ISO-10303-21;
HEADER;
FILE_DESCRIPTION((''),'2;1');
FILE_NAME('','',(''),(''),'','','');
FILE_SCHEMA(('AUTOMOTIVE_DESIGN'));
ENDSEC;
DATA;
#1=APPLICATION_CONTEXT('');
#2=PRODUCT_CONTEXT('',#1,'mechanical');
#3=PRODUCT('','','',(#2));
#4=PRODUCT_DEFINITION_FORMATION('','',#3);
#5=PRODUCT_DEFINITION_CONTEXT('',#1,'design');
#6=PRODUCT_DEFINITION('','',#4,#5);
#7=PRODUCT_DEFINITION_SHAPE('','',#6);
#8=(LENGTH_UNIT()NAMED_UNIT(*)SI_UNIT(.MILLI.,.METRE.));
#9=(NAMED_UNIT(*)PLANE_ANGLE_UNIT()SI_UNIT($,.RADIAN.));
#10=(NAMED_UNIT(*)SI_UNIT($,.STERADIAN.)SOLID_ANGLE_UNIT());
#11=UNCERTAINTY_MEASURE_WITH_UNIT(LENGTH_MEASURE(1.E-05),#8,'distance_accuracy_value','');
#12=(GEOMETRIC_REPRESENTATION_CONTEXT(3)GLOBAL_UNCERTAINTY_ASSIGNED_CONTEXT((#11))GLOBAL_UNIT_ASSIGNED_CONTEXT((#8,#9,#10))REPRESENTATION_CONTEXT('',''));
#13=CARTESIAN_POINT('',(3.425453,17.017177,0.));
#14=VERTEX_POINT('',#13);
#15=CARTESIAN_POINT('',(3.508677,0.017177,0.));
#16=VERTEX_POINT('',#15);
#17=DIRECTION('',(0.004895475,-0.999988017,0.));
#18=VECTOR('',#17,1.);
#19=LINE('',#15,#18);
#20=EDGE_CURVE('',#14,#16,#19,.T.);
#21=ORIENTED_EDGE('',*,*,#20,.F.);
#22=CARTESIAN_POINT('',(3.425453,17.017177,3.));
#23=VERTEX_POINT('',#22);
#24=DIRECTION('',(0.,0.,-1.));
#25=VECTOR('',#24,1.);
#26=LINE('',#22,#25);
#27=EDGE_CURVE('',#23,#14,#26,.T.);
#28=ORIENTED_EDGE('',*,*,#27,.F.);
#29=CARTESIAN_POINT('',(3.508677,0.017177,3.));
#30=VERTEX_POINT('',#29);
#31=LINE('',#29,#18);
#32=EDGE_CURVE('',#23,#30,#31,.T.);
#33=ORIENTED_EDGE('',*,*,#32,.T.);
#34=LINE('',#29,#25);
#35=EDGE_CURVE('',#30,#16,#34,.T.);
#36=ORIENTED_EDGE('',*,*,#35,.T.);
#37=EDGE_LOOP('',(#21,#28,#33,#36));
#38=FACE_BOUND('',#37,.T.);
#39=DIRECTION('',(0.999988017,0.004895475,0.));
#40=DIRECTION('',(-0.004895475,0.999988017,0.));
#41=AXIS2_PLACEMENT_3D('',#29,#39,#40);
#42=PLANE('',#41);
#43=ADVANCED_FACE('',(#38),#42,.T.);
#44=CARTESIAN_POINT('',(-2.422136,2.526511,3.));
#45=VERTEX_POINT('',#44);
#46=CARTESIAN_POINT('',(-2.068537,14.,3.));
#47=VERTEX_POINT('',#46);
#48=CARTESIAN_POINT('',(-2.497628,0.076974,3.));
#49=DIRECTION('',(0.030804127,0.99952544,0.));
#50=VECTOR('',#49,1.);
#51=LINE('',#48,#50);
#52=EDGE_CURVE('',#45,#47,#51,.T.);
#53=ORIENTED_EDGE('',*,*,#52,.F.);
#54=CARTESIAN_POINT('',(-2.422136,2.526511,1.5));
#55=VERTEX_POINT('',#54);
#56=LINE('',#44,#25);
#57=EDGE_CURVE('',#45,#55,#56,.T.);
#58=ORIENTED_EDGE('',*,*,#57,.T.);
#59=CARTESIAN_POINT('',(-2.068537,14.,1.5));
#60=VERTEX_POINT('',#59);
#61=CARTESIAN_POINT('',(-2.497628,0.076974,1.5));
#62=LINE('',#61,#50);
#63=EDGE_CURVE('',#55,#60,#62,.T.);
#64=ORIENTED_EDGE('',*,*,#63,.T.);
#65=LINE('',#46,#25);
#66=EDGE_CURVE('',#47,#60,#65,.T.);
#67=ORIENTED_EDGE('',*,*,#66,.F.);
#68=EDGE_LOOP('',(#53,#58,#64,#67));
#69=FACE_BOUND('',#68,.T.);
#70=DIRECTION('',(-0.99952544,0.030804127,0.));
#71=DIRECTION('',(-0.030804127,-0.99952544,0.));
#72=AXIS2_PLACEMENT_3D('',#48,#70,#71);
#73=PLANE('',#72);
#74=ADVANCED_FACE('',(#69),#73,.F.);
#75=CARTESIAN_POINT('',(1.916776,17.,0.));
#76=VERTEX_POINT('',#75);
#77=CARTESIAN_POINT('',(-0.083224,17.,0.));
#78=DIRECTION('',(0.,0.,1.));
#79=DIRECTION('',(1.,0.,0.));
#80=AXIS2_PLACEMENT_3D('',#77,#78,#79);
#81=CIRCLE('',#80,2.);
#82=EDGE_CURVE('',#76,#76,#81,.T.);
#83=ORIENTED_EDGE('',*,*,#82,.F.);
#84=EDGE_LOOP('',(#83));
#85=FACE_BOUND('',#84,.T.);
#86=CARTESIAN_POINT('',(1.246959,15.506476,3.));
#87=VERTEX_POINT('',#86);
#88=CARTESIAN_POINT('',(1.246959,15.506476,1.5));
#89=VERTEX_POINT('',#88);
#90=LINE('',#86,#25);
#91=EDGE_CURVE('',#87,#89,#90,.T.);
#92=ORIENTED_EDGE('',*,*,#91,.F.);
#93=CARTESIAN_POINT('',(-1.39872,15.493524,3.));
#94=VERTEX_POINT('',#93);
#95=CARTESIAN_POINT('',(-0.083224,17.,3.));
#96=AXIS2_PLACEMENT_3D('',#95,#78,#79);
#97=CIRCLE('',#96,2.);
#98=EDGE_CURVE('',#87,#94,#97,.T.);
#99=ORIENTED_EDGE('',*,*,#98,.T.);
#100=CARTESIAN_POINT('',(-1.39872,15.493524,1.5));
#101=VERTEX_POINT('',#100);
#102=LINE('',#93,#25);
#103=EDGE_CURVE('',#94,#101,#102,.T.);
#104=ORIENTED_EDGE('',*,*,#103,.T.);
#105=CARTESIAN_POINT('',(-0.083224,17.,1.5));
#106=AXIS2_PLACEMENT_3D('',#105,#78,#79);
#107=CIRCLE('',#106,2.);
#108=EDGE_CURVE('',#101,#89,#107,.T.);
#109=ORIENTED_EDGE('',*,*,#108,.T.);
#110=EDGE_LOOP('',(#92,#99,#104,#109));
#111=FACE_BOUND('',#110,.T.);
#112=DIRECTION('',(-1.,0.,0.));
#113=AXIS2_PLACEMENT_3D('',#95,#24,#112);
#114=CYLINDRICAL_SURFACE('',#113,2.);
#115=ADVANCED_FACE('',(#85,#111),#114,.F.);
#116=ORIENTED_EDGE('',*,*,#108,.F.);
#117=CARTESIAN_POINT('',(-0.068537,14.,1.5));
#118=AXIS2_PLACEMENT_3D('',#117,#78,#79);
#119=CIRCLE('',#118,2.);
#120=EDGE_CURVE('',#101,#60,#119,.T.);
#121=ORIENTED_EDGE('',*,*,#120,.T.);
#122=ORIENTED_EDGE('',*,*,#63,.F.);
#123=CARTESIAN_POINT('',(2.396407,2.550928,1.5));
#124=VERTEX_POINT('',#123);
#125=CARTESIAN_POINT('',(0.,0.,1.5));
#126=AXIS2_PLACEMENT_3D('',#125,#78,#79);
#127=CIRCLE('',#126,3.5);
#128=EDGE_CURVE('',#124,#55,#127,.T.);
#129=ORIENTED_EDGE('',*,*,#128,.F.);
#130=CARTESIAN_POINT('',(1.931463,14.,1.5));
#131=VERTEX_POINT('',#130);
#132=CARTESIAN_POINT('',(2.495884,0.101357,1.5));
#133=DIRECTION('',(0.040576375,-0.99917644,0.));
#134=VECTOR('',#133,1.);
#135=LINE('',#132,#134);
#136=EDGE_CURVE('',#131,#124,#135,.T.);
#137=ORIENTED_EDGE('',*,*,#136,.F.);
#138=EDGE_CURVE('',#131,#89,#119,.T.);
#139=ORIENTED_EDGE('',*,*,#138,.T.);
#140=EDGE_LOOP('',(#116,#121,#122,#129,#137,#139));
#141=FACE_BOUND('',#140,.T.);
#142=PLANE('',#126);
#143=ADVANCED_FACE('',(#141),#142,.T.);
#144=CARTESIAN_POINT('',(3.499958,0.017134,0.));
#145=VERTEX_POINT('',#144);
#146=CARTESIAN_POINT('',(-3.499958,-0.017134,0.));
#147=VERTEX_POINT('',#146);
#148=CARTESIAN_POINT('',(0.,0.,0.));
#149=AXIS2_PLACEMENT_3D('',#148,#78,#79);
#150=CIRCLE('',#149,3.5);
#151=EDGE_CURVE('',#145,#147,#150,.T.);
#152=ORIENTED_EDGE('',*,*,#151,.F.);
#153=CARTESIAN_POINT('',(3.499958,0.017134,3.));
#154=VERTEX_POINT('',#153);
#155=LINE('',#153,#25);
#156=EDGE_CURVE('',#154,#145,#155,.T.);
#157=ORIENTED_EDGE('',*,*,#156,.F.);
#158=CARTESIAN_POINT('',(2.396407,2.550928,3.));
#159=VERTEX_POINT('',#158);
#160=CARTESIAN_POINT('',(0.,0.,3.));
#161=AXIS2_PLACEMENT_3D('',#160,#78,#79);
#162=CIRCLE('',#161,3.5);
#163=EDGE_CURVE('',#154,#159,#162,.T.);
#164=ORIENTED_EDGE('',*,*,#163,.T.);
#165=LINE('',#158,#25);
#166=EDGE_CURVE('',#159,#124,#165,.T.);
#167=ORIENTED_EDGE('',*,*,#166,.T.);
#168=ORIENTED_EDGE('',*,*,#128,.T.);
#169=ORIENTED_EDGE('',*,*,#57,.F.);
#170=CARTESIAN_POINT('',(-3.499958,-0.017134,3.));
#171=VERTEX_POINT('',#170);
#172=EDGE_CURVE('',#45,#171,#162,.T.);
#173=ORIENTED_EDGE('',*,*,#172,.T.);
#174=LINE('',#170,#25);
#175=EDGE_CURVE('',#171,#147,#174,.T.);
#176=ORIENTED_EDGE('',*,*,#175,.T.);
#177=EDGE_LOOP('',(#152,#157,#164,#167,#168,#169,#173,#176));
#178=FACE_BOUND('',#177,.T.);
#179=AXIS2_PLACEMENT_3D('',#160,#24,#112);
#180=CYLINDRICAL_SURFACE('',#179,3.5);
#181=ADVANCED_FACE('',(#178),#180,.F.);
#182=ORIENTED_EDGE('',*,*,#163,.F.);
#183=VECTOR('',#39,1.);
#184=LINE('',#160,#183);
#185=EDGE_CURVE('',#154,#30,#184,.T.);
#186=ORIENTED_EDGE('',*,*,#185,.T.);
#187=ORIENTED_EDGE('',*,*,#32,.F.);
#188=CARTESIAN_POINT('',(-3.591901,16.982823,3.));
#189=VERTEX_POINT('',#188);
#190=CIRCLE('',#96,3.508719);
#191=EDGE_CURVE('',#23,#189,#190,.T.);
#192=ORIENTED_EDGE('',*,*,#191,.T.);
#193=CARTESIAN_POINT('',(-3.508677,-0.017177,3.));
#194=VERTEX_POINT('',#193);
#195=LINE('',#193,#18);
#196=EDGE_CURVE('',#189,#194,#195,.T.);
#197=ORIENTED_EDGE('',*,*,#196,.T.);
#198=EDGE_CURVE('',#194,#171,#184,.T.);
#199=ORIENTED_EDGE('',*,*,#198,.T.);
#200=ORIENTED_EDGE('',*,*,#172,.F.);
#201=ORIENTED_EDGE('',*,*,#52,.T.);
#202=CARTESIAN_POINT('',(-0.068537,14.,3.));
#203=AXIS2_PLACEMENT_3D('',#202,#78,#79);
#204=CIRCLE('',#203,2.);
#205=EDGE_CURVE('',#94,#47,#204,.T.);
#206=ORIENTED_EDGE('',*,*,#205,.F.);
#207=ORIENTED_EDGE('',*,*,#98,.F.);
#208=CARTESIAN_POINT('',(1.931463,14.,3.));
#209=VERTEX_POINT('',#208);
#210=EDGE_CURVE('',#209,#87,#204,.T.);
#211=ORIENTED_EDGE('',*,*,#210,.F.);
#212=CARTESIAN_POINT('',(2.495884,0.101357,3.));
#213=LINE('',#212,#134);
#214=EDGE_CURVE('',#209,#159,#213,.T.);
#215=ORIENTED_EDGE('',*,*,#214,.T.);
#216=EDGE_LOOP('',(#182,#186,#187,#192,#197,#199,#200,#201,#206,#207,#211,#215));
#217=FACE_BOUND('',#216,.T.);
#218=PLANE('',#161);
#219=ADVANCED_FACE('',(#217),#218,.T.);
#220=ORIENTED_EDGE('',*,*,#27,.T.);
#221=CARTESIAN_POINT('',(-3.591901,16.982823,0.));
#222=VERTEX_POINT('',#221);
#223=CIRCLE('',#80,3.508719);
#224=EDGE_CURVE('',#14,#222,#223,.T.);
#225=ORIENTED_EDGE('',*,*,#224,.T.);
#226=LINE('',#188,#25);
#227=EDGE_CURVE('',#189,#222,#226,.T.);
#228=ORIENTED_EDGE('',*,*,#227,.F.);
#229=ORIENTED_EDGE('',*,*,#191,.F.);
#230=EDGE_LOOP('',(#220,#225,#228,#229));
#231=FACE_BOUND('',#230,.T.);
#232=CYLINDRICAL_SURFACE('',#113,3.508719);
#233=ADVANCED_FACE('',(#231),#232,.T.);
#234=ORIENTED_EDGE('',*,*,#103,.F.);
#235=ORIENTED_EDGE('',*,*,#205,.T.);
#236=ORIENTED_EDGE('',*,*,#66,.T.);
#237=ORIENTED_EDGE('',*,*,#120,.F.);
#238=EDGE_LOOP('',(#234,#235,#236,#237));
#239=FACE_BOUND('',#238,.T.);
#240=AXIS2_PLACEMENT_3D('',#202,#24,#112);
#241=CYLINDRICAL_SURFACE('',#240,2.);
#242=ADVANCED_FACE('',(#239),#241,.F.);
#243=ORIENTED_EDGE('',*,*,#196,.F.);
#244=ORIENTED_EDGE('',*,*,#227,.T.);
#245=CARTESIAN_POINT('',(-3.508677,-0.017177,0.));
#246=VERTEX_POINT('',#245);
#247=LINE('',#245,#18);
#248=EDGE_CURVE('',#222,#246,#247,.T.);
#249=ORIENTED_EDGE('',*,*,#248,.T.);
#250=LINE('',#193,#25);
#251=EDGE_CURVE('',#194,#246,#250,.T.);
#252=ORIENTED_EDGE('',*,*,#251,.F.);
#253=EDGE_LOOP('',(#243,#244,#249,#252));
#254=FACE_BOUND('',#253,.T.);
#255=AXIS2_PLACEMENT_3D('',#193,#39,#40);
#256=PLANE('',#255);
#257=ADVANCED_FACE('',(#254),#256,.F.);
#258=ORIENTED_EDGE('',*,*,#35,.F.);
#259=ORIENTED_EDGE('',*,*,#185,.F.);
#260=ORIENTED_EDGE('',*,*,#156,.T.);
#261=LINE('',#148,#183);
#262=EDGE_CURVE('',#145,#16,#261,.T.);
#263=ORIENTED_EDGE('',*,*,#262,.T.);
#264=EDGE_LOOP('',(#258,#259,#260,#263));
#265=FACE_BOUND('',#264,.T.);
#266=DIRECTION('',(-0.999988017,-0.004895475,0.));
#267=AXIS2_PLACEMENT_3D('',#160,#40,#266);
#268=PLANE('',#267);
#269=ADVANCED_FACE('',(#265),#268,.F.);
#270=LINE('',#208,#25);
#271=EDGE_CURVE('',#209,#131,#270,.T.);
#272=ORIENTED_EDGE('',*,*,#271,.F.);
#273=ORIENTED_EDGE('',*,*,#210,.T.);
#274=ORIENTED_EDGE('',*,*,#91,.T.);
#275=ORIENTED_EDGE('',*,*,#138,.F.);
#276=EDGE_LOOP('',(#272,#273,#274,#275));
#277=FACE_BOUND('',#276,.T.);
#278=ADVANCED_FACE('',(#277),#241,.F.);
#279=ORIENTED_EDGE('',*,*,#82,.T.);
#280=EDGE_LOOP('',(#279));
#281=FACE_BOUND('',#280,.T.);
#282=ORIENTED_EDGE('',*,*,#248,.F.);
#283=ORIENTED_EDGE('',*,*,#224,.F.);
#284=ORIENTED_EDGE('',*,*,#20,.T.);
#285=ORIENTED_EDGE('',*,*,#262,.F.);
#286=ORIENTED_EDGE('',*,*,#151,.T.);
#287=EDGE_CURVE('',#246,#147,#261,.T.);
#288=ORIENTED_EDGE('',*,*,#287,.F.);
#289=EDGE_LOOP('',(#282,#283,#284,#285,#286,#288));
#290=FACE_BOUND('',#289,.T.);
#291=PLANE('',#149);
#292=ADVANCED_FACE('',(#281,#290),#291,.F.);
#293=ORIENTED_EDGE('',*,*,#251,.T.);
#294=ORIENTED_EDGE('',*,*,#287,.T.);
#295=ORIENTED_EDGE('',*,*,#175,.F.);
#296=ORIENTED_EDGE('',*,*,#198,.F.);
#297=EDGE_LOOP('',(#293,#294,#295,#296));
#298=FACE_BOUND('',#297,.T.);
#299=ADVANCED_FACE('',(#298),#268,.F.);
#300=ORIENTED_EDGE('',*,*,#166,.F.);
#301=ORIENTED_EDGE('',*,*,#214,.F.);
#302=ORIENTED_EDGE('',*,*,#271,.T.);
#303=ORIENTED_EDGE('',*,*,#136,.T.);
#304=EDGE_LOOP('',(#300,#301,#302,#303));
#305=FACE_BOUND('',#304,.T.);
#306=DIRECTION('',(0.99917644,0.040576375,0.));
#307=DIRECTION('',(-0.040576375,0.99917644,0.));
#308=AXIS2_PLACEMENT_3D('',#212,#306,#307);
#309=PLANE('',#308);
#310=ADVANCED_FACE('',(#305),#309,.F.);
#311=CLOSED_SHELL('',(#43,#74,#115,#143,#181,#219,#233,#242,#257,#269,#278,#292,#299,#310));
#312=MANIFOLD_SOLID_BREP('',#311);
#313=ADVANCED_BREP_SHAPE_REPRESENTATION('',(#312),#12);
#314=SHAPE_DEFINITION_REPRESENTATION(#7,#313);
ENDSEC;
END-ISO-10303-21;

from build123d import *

# Parameters (mm, degrees)
BOSS_EXTRU_1_DEPTH = 3
BOSS_EXTRU_2_DEPTH = 1.5


# Read off the part's stored shape, not the designer's step: Boss.-Extru.1
with BuildPart() as part:
    # Boss.-Extru.1 outline → Boss.-Extru.1 (new body)
    with BuildSketch(Plane.XY):
        with BuildLine():
            Line((-2.42213609, 2.526510788), (-2.068537469, 14))
            ThreePointArc((-2.068537469, 14), (-1.893416293, 14.818423654), (-1.398720191, 15.493523995))
            ThreePointArc((-1.398720191, 15.493523995), (-0.093015019, 18.999976034), (1.246958654, 15.506476005))
            ThreePointArc((1.246958654, 15.506476005), (1.752312916, 14.827347495), (1.931462531, 14))
            Line((1.931462531, 14), (2.396407287, 2.550927696))
            ThreePointArc((2.396407287, 2.550927696), (3.208864051, 1.397566279), (3.49995806, 0.017134162))
            Line((3.49995806, 0.017134162), (3.508676576, 0.017176844))
            Line((3.508676576, 0.017176844), (3.425452507, 17.017176844))
            ThreePointArc((3.425452507, 17.017176844), (-0.100400913, 20.508676576), (-3.591900645, 16.982823156))
            Line((-3.591900645, 16.982823156), (-3.508676576, -0.017176844))
            Line((-3.508676576, -0.017176844), (-3.49995806, -0.017134162))
            ThreePointArc((-3.49995806, -0.017134162), (-3.222628149, 1.3655284), (-2.42213609, 2.526510788))
        make_face()
    extrude(amount=BOSS_EXTRU_1_DEPTH)

    # Esquisse1<5> → Boss.-Extru.2 (add)
    with BuildSketch(Plane.XY):
        with BuildLine():
            ThreePointArc((-2.065775424, 14.105074011), (-2.067846838, 14.052555154), (-2.068537469, 14))
            Line((-2.068537469, 14), (-1.902868639, 14))
            ThreePointArc((-1.902868639, 14), (-1.985047825, 14.051411734), (-2.065775424, 14.105074011))
        make_face()
        with BuildLine():
            Line((-1.902868639, 14), (-2.068537469, 14))
            ThreePointArc((-2.068537469, 14), (-0.068537469, 12), (1.931462531, 14))
            Line((1.931462531, 14), (1.7364205, 14))
            ThreePointArc((1.7364205, 14), (-0.083224069, 13.491281379), (-1.902868639, 14))
        make_face()
        with BuildLine():
            Line((1.7364205, 14), (1.931462531, 14))
            ThreePointArc((1.931462531, 14), (1.930490661, 14.062342092), (1.927575995, 14.124623596))
            ThreePointArc((1.927575995, 14.124623596), (1.833011637, 14.060757397), (1.7364205, 14))
        make_face()
        with BuildLine():
            ThreePointArc((-2.065775424, 14.105074011), (-1.985047825, 14.051411734), (-1.902868639, 14))
            Line((-1.902868639, 14), (1.7364205, 14))
            ThreePointArc((1.7364205, 14), (1.833011637, 14.060757397), (1.927575995, 14.124623596))
            ThreePointArc((1.927575995, 14.124623596), (1.725638814, 14.88370327), (1.246958654, 15.506476005))
            ThreePointArc((1.246958654, 15.506476005), (-0.073433119, 15.000023966), (-1.398720191, 15.493523995))
            ThreePointArc((-1.398720191, 15.493523995), (-1.871279944, 14.866094433), (-2.065775424, 14.105074011))
        make_face()
        with BuildLine():
            Line((1.7364205, 14), (-1.902868639, 14))
            ThreePointArc((-1.902868639, 14), (-0.083224069, 13.491281379), (1.7364205, 14))
        make_face()
        with BuildLine():
            Line((-2.068537469, 14), (-2.42213609, 2.526510788))
            ThreePointArc((-2.42213609, 2.526510788), (-0.017735252, 3.499955066), (2.396407287, 2.550927696))
            Line((2.396407287, 2.550927696), (1.931462531, 14))
            ThreePointArc((1.931462531, 14), (-0.068537469, 12), (-2.068537469, 14))
        make_face()
    extrude(amount=BOSS_EXTRU_2_DEPTH)


solid = part.part
